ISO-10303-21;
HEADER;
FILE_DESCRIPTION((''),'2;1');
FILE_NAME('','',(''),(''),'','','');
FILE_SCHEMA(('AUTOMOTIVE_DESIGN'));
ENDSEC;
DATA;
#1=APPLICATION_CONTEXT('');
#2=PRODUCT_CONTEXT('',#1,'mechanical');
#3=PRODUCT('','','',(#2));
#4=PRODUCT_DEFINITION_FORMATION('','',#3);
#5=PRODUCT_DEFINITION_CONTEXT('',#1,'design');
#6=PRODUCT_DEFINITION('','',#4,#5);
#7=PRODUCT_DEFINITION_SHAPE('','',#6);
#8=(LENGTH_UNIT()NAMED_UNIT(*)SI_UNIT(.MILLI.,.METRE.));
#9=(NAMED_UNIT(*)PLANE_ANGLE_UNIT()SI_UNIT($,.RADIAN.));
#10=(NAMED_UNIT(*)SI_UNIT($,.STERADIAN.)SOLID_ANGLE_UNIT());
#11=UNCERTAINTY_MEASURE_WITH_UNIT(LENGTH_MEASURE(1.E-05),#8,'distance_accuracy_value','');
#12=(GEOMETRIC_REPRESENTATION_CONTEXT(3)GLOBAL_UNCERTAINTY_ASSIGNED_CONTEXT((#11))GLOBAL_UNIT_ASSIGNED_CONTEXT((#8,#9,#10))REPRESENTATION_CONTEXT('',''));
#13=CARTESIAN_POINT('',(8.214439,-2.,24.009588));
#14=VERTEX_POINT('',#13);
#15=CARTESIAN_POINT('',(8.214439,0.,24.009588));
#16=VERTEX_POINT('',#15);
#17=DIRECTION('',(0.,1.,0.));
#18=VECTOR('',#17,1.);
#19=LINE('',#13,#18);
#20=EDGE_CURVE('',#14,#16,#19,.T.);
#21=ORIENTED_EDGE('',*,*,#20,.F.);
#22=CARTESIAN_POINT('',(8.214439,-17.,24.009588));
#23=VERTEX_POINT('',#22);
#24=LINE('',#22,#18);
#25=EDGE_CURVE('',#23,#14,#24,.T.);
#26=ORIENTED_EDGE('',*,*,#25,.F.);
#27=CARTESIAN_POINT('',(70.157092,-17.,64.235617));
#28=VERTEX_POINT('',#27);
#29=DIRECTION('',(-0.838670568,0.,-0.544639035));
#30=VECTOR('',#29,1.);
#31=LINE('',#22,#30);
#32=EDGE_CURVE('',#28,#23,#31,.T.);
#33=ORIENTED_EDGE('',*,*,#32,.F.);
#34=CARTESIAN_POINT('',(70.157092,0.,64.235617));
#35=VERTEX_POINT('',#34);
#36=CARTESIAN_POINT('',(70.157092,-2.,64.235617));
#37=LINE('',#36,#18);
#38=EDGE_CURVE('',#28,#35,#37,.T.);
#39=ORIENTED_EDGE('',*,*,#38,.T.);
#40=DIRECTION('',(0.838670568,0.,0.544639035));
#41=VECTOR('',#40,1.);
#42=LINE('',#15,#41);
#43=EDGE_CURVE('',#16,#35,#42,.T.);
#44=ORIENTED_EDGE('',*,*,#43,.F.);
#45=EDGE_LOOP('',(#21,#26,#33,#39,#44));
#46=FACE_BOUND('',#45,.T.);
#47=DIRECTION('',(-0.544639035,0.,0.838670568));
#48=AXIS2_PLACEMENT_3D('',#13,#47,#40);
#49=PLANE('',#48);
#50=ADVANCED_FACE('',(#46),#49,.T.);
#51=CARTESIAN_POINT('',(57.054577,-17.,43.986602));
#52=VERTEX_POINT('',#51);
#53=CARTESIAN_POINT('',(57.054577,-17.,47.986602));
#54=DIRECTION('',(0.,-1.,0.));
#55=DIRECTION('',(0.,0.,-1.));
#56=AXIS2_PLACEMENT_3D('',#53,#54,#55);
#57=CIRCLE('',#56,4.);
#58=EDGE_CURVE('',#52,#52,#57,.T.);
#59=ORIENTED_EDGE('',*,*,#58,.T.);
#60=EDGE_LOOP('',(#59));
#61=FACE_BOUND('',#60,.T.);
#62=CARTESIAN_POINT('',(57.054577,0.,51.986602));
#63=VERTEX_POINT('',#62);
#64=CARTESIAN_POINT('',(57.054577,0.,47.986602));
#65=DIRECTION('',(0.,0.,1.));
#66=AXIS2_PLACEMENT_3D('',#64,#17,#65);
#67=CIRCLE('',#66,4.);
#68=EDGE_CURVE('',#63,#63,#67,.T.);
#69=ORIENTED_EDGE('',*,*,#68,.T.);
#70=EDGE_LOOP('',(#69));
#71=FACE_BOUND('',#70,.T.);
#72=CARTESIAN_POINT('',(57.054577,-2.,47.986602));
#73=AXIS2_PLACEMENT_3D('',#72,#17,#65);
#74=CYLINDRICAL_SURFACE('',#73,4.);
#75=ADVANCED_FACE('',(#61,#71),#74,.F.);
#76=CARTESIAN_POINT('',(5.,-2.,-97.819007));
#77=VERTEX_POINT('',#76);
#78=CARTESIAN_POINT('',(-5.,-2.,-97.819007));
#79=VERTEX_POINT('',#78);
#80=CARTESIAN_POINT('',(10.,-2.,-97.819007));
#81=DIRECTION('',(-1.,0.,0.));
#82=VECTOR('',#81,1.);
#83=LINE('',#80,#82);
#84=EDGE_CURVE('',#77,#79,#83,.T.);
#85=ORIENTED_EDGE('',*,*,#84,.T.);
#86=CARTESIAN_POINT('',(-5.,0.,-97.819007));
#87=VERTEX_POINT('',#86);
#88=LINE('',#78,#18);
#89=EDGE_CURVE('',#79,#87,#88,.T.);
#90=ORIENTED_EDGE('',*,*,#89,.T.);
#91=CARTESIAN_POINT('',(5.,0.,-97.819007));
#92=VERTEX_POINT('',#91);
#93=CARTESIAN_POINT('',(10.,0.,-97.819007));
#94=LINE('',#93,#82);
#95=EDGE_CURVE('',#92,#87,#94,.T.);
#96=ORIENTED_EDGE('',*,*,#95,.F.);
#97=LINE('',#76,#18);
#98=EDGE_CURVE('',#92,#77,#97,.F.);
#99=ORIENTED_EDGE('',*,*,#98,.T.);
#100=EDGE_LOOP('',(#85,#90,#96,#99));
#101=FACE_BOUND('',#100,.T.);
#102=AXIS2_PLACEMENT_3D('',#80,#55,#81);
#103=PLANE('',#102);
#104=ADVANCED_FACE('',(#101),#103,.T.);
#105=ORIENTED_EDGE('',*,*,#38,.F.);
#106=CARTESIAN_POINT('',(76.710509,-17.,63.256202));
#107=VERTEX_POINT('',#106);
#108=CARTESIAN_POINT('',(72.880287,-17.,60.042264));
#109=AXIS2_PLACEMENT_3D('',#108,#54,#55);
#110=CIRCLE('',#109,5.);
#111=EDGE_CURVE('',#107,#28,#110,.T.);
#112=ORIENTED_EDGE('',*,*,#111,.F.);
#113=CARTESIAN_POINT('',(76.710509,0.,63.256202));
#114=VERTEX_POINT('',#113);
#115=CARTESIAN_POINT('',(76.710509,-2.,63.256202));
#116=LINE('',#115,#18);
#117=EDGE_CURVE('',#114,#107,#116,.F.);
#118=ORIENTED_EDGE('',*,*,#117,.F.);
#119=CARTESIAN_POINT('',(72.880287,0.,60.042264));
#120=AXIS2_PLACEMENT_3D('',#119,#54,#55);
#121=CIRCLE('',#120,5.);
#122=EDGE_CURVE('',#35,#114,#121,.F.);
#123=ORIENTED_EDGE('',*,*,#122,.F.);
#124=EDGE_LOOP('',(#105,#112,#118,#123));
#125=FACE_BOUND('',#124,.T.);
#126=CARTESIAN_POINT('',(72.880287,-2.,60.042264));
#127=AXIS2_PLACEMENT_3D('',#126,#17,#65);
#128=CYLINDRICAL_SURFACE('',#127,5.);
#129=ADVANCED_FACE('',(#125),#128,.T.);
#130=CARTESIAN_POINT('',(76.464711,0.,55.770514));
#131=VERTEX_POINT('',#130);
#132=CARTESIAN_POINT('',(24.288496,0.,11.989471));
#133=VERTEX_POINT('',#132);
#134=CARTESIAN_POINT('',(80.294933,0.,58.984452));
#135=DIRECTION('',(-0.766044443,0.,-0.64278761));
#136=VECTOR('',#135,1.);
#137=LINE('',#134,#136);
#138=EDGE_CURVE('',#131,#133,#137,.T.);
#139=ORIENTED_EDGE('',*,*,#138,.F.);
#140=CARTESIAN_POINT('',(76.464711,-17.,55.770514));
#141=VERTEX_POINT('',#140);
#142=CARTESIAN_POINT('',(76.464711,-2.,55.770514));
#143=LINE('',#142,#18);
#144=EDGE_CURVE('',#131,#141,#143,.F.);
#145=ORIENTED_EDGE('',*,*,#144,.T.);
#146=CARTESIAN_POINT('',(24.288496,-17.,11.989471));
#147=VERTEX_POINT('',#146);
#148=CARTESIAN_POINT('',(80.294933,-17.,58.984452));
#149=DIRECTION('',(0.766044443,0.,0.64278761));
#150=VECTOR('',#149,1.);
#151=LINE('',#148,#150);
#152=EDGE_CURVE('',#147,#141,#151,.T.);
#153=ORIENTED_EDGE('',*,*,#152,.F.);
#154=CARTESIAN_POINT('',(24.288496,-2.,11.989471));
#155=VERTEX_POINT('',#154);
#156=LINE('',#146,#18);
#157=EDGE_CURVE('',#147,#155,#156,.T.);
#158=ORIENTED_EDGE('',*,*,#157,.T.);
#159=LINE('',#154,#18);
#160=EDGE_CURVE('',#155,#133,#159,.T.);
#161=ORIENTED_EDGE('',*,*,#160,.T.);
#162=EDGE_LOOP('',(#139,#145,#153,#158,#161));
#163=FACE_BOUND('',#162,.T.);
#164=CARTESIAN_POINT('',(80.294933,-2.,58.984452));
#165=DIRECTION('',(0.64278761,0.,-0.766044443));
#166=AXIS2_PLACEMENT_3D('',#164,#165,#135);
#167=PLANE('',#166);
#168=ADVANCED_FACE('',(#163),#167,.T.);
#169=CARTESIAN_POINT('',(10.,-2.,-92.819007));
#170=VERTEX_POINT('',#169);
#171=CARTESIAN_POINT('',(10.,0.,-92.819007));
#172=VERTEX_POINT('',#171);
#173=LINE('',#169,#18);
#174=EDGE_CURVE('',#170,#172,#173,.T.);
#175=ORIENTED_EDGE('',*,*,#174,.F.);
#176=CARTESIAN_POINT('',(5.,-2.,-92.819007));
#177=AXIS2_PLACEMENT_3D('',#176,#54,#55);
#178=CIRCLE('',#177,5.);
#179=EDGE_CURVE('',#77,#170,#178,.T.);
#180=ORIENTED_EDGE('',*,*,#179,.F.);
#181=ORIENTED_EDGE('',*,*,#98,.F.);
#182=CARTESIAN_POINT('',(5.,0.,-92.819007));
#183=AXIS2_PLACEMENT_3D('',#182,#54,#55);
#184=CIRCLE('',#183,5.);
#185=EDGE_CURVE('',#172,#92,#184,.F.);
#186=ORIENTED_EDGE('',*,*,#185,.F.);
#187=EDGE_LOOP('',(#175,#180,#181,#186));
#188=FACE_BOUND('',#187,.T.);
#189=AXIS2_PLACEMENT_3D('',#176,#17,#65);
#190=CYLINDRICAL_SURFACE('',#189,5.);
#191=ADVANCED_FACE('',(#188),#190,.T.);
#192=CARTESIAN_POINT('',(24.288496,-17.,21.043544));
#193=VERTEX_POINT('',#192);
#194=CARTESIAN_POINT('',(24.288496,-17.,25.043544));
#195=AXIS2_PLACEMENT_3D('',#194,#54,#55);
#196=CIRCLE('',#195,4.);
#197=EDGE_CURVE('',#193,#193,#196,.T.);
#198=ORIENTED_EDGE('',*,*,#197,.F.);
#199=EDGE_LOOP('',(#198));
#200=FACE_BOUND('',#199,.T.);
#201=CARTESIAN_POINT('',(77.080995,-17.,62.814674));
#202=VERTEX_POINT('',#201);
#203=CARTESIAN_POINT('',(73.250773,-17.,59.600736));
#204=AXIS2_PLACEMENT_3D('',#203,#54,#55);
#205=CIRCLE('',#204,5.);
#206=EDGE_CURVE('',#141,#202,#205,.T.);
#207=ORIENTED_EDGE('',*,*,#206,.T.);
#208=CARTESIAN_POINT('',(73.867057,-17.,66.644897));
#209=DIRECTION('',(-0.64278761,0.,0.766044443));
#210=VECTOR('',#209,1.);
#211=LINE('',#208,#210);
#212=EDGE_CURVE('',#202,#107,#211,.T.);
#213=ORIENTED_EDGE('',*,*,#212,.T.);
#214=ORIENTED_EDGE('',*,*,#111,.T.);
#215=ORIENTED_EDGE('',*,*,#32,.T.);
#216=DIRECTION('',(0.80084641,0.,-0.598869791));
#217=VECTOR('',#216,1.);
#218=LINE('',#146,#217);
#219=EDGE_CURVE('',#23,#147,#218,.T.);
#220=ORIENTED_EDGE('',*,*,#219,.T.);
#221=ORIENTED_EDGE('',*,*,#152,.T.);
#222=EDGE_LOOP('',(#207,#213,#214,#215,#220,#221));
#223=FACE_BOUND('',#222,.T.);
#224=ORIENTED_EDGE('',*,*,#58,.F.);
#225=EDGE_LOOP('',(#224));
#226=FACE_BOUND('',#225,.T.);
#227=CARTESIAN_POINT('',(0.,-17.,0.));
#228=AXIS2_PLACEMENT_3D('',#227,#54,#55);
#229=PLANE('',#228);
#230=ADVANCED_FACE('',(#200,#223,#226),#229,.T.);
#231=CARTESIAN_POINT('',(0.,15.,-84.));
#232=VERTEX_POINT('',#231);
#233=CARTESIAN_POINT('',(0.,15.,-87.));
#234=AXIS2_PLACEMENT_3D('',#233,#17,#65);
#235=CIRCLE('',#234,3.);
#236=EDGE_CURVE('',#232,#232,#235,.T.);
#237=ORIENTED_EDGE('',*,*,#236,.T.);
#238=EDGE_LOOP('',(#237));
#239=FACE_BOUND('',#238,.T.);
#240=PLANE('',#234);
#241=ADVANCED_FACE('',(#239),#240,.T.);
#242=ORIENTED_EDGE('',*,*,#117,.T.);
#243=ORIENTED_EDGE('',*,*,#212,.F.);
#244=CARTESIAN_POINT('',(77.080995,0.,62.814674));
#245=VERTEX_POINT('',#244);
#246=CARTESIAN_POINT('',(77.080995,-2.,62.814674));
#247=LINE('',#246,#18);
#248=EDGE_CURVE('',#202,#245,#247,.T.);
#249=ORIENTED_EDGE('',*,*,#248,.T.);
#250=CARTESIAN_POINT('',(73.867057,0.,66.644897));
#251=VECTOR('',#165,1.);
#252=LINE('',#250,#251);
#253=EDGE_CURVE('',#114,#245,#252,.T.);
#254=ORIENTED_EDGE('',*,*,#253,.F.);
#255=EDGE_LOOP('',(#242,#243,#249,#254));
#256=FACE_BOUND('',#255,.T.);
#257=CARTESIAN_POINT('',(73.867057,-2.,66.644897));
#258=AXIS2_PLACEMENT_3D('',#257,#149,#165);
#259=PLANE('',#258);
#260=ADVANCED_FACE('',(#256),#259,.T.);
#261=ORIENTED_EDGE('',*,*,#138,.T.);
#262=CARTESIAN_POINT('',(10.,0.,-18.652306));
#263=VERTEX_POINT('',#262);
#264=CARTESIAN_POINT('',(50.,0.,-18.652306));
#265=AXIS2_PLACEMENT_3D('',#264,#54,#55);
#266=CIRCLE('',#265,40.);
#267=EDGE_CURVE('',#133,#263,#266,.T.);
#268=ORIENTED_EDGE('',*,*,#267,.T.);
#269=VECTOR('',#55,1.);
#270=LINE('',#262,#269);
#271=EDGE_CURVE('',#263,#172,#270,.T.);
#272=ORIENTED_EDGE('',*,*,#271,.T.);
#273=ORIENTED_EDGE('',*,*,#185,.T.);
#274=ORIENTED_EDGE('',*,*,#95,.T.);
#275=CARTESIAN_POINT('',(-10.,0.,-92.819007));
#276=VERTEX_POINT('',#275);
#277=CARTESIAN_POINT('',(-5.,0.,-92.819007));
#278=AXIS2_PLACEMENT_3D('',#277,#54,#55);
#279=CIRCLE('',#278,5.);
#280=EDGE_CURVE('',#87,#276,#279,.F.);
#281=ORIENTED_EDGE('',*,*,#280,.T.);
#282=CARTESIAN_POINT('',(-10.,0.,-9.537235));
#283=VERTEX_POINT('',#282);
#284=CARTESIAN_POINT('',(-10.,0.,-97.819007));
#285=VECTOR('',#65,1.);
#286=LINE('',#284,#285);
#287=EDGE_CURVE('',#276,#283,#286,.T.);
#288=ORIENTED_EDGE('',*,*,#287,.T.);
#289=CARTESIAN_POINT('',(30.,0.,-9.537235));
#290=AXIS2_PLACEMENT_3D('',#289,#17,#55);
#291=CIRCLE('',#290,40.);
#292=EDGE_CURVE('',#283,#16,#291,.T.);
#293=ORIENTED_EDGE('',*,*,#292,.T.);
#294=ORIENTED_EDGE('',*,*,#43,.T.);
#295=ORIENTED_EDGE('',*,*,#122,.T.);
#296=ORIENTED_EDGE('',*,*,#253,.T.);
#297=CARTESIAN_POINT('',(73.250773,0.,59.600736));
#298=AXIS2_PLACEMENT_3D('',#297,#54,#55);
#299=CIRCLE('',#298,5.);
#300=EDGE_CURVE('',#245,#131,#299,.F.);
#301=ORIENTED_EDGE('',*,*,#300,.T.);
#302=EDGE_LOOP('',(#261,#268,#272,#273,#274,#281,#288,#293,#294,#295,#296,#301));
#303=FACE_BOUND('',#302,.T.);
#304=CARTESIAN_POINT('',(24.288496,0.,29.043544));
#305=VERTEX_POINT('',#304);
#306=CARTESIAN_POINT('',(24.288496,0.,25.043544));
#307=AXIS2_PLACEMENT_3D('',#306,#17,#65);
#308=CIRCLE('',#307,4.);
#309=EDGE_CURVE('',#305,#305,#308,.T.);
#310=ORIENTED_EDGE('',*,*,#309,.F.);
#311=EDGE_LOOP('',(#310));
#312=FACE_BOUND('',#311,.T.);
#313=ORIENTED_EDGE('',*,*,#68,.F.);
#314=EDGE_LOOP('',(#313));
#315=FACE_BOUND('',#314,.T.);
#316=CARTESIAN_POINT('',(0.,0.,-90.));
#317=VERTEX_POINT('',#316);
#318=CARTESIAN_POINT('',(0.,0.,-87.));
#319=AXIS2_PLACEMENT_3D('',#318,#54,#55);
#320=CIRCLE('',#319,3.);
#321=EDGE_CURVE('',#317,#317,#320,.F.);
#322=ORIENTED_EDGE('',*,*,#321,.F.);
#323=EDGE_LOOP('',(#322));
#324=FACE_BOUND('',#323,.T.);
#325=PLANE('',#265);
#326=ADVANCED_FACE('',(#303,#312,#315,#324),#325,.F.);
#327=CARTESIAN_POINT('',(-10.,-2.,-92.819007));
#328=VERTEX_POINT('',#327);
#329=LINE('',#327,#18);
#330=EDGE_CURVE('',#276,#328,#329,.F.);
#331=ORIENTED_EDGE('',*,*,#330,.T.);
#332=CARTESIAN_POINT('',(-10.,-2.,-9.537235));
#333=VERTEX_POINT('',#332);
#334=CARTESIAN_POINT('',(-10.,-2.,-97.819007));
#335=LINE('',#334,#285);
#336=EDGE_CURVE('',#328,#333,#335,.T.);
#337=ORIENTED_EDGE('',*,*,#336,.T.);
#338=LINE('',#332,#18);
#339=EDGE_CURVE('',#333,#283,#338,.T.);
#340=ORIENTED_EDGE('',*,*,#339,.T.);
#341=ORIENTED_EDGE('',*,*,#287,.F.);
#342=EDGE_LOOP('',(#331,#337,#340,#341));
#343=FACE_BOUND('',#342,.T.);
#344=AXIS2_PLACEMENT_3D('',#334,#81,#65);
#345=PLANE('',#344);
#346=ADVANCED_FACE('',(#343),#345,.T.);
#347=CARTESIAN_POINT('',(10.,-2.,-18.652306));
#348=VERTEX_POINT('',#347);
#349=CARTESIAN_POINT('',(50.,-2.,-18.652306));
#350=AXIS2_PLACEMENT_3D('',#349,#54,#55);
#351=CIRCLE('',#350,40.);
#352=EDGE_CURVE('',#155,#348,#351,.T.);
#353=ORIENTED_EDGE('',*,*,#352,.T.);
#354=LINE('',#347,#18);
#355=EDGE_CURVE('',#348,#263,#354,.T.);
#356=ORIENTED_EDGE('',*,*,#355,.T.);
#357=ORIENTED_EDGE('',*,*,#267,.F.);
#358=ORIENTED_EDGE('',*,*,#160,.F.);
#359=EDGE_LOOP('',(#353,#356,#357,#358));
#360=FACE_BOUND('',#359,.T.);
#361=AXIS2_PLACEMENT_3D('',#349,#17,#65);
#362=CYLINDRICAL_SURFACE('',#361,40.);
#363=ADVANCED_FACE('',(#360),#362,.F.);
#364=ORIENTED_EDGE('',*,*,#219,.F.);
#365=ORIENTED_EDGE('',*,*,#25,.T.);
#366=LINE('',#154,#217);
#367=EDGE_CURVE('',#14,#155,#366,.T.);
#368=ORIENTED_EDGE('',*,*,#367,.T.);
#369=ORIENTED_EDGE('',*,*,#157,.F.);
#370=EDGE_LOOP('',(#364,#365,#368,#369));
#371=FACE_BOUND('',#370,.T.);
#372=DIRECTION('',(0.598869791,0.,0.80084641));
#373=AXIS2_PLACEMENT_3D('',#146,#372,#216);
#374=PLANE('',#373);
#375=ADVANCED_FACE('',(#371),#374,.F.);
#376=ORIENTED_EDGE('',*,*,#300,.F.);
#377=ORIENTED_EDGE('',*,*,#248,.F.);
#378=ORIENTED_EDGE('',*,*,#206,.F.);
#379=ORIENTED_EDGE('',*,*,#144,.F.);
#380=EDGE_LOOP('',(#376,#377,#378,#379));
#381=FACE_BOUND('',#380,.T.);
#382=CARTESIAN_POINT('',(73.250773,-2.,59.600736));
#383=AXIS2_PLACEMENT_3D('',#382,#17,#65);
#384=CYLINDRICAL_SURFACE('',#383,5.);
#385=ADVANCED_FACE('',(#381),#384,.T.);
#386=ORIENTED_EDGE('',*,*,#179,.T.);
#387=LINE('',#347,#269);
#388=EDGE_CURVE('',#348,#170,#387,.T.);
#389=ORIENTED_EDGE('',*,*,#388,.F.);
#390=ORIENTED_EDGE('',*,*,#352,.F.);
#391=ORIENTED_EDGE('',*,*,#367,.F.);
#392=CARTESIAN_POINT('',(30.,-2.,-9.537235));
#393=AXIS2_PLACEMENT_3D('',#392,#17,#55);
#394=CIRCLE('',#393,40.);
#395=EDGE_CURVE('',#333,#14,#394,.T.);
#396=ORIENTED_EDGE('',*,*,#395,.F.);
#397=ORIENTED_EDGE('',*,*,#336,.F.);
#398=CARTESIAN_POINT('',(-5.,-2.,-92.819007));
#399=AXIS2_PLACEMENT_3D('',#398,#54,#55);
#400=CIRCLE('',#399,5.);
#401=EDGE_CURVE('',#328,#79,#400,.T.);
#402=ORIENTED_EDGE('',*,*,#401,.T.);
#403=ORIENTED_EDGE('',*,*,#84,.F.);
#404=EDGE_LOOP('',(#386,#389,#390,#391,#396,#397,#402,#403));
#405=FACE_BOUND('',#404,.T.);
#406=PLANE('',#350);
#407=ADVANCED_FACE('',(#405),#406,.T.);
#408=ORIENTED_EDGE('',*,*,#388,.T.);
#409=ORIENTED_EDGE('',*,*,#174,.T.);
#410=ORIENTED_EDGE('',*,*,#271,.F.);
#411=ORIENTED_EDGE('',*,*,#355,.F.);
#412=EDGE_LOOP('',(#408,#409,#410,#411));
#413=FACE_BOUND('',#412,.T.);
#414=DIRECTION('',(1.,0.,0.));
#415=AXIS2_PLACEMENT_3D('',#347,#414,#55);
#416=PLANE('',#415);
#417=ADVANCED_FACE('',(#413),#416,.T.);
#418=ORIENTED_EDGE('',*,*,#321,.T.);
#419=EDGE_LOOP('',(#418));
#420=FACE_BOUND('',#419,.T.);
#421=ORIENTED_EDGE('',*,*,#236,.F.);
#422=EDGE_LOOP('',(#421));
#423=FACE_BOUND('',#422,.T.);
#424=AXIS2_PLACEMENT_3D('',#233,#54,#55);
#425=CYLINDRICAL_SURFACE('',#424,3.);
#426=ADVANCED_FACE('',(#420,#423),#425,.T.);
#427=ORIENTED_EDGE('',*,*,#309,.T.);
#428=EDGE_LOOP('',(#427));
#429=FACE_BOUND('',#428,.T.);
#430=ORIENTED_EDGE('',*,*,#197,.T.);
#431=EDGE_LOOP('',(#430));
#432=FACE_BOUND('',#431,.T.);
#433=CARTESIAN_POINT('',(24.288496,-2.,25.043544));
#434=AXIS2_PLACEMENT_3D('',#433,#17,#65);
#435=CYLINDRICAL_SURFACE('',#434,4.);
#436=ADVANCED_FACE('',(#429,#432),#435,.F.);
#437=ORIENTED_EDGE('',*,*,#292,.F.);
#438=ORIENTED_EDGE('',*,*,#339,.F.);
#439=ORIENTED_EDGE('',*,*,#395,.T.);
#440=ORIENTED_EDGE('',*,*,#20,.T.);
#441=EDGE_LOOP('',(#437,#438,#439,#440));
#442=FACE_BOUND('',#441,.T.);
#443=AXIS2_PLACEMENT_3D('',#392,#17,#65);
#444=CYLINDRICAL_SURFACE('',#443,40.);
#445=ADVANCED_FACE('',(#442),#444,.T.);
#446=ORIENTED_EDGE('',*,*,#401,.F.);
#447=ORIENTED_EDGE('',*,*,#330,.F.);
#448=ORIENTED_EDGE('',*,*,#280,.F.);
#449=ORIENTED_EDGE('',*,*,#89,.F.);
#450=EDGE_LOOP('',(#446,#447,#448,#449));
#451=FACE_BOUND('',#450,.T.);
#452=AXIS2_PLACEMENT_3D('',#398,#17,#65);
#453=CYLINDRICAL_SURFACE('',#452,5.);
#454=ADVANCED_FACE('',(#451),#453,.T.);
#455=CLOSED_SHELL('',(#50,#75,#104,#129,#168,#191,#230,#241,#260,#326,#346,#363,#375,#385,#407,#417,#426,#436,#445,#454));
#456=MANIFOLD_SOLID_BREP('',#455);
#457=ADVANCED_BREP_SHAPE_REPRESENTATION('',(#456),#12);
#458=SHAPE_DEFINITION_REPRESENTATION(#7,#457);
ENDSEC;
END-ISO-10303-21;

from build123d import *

# Parameters (mm, degrees)
SKETCH1_R           = 4
BASE_FLANGE1_DEPTH  = 2
SKETCH6_R           = 4
BOSS_EXTRUDE1_DEPTH = 15
SKETCH7_R           = 3
BOSS_EXTRUDE2_DEPTH = 15
FILLET2_R           = 5


# Sheet-metal steps are written as plain solids
with BuildPart() as part:
    # Sketch1 → Base-Flange1 (new body)
    with BuildSketch(Plane(origin=(0, 0, 0), x_dir=(1, 0, 0), z_dir=(0, 1, 0))):
        with BuildLine():
            Line((8.214438599, -24.009587925), (73.867056795, -66.644896694))
            Line((73.867056795, -66.644896694), (80.294932891, -58.984452263))
            Line((80.294932891, -58.984452263), (24.288495613, -11.989471399))
            ThreePointArc((24.288495613, -11.989471399), (13.747688519, 1.747575857), (10, 18.652306326))
            Line((10, 18.652306326), (10, 97.819006808))
            Line((10, 97.819006808), (-10, 97.819006808))
            Line((-10, 97.819006808), (-10, 9.537234793))
            ThreePointArc((-10, 9.537234793), (-5.152684506, -9.549115617), (8.214438599, -24.009587925))
        make_face()
        with Locations(Location((24.288495613, -25.043544292, 0), (0, 0, 270))):
            Circle(SKETCH1_R, mode=Mode.SUBTRACT)
        with Locations(Location((57.054577384, -47.986601746, 0), (0, 0, 270))):
            Circle(SKETCH1_R, mode=Mode.SUBTRACT)
    extrude(amount=-BASE_FLANGE1_DEPTH)

    # Sketch6 → Boss-Extrude1 (add)
    with BuildSketch(Plane.XZ.offset(2)):
        Polygon((8.214438599, 24.009587925), (73.867056795, 66.644896694), (80.294932891, 58.984452263), (24.288495613, 11.989471399), align=None)
        with Locations(Location((24.288495613, 25.043544292, 0), (0, 0, 90))):
            Circle(SKETCH6_R, mode=Mode.SUBTRACT)
        with Locations(Location((57.054577384, 47.986601746, 0), (0, 0, 90))):
            Circle(SKETCH6_R, mode=Mode.SUBTRACT)
    extrude(amount=BOSS_EXTRUDE1_DEPTH)

    # Sketch7 → Boss-Extrude2 (add)
    with BuildSketch(Plane(origin=(0, 0, 0), x_dir=(1, 0, 0), z_dir=(0, 1, 0))):
        with Locations(Location((0, 87, 0), (0, 0, 90))):
            Circle(SKETCH7_R)
    extrude(amount=BOSS_EXTRUDE2_DEPTH)

    # Fillet2
    fillet2_edges = [part.edges().sort_by_distance(p)[0] for p in [
        (73.867056795, -8.5, 66.644896694),
        (-10, -1, -97.819006808),
        (10, -1, -97.819006808),
        (80.294932891, -8.5, 58.984452263),
    ]]
    fillet(fillet2_edges, radius=FILLET2_R)


solid = part.part
